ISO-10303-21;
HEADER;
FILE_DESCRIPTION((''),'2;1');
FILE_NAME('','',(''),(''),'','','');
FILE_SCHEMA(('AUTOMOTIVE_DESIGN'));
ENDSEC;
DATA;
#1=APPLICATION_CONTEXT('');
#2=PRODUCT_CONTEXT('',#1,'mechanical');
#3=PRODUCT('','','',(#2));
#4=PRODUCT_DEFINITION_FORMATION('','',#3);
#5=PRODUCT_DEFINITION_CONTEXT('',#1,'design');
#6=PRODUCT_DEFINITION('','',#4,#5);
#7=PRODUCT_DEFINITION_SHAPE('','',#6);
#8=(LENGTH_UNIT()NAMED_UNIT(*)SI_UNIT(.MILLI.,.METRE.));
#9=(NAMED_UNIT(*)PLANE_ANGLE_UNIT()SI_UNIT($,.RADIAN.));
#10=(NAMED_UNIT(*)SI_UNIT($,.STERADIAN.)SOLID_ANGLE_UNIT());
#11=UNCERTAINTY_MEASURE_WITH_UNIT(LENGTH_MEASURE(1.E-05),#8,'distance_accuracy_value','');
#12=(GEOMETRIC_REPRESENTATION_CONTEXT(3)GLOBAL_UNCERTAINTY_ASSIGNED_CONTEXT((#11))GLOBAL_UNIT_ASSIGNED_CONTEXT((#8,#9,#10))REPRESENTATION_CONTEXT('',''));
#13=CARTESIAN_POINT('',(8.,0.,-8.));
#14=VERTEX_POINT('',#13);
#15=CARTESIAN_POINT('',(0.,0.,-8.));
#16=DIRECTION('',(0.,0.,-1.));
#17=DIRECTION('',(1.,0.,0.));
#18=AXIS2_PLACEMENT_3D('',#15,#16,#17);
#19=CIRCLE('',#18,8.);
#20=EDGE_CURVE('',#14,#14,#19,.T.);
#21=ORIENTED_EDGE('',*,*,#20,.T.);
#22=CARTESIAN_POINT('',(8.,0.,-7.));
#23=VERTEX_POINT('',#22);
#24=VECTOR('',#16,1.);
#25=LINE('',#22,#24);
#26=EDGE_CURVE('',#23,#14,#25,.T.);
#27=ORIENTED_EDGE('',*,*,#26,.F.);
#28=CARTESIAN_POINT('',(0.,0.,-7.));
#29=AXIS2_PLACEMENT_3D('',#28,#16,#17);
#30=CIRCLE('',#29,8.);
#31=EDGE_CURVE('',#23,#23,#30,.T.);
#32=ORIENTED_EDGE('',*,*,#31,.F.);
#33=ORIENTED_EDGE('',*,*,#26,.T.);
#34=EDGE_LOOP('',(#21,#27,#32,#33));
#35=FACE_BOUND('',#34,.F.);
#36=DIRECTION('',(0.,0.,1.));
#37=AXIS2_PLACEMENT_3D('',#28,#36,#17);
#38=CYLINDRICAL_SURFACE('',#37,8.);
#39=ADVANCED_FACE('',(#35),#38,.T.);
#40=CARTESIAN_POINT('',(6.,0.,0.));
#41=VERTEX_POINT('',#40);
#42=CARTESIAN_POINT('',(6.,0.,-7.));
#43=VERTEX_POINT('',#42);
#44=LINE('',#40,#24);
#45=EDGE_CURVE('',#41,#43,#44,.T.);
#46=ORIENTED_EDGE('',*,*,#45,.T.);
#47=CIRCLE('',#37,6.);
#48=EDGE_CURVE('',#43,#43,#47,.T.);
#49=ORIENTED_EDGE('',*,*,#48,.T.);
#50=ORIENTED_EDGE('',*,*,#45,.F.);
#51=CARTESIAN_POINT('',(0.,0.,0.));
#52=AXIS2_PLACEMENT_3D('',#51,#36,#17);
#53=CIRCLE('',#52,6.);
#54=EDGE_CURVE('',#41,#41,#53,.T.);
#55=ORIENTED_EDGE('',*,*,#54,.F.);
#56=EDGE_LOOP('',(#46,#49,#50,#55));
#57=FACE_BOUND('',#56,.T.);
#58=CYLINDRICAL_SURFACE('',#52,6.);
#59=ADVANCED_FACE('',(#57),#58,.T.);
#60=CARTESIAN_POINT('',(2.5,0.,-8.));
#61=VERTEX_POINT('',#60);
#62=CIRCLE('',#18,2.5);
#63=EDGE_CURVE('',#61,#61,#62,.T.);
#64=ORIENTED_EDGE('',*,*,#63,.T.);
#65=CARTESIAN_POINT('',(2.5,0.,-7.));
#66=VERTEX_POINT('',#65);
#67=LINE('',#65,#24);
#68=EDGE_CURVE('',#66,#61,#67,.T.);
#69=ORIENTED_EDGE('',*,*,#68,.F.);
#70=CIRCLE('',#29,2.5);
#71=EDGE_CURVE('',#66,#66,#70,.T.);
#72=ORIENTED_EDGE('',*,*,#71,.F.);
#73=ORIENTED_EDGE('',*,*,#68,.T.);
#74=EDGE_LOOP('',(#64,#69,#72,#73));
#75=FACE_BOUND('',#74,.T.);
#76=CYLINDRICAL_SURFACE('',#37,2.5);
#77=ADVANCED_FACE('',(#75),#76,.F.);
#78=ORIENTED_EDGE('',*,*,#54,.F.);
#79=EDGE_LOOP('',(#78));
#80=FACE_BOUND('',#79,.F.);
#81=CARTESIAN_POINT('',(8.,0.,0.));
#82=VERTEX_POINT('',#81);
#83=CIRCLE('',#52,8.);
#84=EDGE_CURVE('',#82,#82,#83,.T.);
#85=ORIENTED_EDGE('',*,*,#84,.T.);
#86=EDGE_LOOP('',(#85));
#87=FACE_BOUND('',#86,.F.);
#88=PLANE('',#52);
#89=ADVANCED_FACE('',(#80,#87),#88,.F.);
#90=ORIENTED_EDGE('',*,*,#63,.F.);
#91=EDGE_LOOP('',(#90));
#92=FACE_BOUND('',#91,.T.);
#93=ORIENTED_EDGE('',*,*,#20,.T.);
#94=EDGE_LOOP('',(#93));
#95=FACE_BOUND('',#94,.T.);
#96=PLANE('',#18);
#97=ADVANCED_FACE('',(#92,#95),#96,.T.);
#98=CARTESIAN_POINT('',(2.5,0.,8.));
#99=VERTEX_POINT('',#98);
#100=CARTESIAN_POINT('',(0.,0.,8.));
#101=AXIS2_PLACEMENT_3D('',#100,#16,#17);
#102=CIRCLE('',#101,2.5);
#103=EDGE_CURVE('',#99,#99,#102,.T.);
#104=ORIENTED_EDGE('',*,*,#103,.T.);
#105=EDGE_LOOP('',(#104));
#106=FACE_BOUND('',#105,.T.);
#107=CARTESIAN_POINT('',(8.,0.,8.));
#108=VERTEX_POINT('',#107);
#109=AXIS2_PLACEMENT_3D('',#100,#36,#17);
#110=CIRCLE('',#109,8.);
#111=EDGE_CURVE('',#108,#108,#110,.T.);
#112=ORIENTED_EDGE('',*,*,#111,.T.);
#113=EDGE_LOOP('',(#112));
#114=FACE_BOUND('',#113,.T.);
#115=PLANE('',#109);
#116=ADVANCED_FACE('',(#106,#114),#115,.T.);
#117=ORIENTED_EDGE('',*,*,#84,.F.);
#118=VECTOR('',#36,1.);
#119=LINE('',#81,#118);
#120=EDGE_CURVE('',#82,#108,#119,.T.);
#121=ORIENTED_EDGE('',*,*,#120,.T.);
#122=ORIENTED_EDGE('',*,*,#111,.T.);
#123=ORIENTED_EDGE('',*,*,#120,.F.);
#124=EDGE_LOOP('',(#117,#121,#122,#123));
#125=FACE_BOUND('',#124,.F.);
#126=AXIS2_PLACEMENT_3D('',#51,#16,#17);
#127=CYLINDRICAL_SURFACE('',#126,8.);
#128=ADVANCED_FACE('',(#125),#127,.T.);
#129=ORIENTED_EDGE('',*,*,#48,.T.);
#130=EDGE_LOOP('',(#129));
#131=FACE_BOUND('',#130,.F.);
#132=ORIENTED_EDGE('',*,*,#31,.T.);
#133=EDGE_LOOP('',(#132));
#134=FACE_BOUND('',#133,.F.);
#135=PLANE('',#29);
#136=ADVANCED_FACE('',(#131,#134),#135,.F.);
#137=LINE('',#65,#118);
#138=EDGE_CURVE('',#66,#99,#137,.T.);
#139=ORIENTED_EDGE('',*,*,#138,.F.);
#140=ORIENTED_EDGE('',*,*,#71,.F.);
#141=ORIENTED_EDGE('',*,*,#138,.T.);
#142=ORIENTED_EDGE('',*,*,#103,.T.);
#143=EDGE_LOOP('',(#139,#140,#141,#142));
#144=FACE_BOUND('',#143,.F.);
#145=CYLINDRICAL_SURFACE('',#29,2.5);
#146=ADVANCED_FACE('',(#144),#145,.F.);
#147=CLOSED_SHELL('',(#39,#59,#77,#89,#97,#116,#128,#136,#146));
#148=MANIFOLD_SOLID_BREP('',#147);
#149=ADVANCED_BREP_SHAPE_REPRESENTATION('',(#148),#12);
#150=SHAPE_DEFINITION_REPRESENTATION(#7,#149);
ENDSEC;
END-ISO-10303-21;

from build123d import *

# Parameters (mm, degrees)
F0_R     = 8
F0_R_2   = 6
F1_DEPTH = 8
F2_DEPTH = 7
F3_R     = 8
F3_R_2   = 6
F3_R_3   = 2.5
F4_DEPTH = 1
F5_DEPTH = 15.001


# Not quite as in the source:
# - a feature names something its author has since deleted; it is built from what else it names


with BuildPart() as f1:
    # F0 (on Top) → F1 (new body)
    with BuildSketch(Plane.XY):
        Circle(F0_R)
        Circle(F0_R_2, mode=Mode.SUBTRACT)
        Circle(F0_R_2)
    extrude(amount=F1_DEPTH)

    # F0 (on Top) → F2 (join)
    with BuildSketch(Plane.XY):
        Circle(F0_R_2)
    extrude(amount=-F2_DEPTH)

    # F3 (on face) → F4 (join)
    with BuildSketch(Plane(origin=(0, 0, -7), x_dir=(1, 0, 0), z_dir=(0, 0, -1))):
        Circle(F3_R)
        Circle(F3_R_2, mode=Mode.SUBTRACT)
        Circle(F3_R_2)
        Circle(F3_R_3, mode=Mode.SUBTRACT)
    extrude(amount=F4_DEPTH)

    # F3 (on face) → F5 (cut, through all)
    with BuildSketch(Plane(origin=(0, 0, -7), x_dir=(1, 0, 0), z_dir=(0, 0, -1))):
        Circle(F3_R_3)
    extrude(amount=-F5_DEPTH, mode=Mode.SUBTRACT)


solid = f1.part
